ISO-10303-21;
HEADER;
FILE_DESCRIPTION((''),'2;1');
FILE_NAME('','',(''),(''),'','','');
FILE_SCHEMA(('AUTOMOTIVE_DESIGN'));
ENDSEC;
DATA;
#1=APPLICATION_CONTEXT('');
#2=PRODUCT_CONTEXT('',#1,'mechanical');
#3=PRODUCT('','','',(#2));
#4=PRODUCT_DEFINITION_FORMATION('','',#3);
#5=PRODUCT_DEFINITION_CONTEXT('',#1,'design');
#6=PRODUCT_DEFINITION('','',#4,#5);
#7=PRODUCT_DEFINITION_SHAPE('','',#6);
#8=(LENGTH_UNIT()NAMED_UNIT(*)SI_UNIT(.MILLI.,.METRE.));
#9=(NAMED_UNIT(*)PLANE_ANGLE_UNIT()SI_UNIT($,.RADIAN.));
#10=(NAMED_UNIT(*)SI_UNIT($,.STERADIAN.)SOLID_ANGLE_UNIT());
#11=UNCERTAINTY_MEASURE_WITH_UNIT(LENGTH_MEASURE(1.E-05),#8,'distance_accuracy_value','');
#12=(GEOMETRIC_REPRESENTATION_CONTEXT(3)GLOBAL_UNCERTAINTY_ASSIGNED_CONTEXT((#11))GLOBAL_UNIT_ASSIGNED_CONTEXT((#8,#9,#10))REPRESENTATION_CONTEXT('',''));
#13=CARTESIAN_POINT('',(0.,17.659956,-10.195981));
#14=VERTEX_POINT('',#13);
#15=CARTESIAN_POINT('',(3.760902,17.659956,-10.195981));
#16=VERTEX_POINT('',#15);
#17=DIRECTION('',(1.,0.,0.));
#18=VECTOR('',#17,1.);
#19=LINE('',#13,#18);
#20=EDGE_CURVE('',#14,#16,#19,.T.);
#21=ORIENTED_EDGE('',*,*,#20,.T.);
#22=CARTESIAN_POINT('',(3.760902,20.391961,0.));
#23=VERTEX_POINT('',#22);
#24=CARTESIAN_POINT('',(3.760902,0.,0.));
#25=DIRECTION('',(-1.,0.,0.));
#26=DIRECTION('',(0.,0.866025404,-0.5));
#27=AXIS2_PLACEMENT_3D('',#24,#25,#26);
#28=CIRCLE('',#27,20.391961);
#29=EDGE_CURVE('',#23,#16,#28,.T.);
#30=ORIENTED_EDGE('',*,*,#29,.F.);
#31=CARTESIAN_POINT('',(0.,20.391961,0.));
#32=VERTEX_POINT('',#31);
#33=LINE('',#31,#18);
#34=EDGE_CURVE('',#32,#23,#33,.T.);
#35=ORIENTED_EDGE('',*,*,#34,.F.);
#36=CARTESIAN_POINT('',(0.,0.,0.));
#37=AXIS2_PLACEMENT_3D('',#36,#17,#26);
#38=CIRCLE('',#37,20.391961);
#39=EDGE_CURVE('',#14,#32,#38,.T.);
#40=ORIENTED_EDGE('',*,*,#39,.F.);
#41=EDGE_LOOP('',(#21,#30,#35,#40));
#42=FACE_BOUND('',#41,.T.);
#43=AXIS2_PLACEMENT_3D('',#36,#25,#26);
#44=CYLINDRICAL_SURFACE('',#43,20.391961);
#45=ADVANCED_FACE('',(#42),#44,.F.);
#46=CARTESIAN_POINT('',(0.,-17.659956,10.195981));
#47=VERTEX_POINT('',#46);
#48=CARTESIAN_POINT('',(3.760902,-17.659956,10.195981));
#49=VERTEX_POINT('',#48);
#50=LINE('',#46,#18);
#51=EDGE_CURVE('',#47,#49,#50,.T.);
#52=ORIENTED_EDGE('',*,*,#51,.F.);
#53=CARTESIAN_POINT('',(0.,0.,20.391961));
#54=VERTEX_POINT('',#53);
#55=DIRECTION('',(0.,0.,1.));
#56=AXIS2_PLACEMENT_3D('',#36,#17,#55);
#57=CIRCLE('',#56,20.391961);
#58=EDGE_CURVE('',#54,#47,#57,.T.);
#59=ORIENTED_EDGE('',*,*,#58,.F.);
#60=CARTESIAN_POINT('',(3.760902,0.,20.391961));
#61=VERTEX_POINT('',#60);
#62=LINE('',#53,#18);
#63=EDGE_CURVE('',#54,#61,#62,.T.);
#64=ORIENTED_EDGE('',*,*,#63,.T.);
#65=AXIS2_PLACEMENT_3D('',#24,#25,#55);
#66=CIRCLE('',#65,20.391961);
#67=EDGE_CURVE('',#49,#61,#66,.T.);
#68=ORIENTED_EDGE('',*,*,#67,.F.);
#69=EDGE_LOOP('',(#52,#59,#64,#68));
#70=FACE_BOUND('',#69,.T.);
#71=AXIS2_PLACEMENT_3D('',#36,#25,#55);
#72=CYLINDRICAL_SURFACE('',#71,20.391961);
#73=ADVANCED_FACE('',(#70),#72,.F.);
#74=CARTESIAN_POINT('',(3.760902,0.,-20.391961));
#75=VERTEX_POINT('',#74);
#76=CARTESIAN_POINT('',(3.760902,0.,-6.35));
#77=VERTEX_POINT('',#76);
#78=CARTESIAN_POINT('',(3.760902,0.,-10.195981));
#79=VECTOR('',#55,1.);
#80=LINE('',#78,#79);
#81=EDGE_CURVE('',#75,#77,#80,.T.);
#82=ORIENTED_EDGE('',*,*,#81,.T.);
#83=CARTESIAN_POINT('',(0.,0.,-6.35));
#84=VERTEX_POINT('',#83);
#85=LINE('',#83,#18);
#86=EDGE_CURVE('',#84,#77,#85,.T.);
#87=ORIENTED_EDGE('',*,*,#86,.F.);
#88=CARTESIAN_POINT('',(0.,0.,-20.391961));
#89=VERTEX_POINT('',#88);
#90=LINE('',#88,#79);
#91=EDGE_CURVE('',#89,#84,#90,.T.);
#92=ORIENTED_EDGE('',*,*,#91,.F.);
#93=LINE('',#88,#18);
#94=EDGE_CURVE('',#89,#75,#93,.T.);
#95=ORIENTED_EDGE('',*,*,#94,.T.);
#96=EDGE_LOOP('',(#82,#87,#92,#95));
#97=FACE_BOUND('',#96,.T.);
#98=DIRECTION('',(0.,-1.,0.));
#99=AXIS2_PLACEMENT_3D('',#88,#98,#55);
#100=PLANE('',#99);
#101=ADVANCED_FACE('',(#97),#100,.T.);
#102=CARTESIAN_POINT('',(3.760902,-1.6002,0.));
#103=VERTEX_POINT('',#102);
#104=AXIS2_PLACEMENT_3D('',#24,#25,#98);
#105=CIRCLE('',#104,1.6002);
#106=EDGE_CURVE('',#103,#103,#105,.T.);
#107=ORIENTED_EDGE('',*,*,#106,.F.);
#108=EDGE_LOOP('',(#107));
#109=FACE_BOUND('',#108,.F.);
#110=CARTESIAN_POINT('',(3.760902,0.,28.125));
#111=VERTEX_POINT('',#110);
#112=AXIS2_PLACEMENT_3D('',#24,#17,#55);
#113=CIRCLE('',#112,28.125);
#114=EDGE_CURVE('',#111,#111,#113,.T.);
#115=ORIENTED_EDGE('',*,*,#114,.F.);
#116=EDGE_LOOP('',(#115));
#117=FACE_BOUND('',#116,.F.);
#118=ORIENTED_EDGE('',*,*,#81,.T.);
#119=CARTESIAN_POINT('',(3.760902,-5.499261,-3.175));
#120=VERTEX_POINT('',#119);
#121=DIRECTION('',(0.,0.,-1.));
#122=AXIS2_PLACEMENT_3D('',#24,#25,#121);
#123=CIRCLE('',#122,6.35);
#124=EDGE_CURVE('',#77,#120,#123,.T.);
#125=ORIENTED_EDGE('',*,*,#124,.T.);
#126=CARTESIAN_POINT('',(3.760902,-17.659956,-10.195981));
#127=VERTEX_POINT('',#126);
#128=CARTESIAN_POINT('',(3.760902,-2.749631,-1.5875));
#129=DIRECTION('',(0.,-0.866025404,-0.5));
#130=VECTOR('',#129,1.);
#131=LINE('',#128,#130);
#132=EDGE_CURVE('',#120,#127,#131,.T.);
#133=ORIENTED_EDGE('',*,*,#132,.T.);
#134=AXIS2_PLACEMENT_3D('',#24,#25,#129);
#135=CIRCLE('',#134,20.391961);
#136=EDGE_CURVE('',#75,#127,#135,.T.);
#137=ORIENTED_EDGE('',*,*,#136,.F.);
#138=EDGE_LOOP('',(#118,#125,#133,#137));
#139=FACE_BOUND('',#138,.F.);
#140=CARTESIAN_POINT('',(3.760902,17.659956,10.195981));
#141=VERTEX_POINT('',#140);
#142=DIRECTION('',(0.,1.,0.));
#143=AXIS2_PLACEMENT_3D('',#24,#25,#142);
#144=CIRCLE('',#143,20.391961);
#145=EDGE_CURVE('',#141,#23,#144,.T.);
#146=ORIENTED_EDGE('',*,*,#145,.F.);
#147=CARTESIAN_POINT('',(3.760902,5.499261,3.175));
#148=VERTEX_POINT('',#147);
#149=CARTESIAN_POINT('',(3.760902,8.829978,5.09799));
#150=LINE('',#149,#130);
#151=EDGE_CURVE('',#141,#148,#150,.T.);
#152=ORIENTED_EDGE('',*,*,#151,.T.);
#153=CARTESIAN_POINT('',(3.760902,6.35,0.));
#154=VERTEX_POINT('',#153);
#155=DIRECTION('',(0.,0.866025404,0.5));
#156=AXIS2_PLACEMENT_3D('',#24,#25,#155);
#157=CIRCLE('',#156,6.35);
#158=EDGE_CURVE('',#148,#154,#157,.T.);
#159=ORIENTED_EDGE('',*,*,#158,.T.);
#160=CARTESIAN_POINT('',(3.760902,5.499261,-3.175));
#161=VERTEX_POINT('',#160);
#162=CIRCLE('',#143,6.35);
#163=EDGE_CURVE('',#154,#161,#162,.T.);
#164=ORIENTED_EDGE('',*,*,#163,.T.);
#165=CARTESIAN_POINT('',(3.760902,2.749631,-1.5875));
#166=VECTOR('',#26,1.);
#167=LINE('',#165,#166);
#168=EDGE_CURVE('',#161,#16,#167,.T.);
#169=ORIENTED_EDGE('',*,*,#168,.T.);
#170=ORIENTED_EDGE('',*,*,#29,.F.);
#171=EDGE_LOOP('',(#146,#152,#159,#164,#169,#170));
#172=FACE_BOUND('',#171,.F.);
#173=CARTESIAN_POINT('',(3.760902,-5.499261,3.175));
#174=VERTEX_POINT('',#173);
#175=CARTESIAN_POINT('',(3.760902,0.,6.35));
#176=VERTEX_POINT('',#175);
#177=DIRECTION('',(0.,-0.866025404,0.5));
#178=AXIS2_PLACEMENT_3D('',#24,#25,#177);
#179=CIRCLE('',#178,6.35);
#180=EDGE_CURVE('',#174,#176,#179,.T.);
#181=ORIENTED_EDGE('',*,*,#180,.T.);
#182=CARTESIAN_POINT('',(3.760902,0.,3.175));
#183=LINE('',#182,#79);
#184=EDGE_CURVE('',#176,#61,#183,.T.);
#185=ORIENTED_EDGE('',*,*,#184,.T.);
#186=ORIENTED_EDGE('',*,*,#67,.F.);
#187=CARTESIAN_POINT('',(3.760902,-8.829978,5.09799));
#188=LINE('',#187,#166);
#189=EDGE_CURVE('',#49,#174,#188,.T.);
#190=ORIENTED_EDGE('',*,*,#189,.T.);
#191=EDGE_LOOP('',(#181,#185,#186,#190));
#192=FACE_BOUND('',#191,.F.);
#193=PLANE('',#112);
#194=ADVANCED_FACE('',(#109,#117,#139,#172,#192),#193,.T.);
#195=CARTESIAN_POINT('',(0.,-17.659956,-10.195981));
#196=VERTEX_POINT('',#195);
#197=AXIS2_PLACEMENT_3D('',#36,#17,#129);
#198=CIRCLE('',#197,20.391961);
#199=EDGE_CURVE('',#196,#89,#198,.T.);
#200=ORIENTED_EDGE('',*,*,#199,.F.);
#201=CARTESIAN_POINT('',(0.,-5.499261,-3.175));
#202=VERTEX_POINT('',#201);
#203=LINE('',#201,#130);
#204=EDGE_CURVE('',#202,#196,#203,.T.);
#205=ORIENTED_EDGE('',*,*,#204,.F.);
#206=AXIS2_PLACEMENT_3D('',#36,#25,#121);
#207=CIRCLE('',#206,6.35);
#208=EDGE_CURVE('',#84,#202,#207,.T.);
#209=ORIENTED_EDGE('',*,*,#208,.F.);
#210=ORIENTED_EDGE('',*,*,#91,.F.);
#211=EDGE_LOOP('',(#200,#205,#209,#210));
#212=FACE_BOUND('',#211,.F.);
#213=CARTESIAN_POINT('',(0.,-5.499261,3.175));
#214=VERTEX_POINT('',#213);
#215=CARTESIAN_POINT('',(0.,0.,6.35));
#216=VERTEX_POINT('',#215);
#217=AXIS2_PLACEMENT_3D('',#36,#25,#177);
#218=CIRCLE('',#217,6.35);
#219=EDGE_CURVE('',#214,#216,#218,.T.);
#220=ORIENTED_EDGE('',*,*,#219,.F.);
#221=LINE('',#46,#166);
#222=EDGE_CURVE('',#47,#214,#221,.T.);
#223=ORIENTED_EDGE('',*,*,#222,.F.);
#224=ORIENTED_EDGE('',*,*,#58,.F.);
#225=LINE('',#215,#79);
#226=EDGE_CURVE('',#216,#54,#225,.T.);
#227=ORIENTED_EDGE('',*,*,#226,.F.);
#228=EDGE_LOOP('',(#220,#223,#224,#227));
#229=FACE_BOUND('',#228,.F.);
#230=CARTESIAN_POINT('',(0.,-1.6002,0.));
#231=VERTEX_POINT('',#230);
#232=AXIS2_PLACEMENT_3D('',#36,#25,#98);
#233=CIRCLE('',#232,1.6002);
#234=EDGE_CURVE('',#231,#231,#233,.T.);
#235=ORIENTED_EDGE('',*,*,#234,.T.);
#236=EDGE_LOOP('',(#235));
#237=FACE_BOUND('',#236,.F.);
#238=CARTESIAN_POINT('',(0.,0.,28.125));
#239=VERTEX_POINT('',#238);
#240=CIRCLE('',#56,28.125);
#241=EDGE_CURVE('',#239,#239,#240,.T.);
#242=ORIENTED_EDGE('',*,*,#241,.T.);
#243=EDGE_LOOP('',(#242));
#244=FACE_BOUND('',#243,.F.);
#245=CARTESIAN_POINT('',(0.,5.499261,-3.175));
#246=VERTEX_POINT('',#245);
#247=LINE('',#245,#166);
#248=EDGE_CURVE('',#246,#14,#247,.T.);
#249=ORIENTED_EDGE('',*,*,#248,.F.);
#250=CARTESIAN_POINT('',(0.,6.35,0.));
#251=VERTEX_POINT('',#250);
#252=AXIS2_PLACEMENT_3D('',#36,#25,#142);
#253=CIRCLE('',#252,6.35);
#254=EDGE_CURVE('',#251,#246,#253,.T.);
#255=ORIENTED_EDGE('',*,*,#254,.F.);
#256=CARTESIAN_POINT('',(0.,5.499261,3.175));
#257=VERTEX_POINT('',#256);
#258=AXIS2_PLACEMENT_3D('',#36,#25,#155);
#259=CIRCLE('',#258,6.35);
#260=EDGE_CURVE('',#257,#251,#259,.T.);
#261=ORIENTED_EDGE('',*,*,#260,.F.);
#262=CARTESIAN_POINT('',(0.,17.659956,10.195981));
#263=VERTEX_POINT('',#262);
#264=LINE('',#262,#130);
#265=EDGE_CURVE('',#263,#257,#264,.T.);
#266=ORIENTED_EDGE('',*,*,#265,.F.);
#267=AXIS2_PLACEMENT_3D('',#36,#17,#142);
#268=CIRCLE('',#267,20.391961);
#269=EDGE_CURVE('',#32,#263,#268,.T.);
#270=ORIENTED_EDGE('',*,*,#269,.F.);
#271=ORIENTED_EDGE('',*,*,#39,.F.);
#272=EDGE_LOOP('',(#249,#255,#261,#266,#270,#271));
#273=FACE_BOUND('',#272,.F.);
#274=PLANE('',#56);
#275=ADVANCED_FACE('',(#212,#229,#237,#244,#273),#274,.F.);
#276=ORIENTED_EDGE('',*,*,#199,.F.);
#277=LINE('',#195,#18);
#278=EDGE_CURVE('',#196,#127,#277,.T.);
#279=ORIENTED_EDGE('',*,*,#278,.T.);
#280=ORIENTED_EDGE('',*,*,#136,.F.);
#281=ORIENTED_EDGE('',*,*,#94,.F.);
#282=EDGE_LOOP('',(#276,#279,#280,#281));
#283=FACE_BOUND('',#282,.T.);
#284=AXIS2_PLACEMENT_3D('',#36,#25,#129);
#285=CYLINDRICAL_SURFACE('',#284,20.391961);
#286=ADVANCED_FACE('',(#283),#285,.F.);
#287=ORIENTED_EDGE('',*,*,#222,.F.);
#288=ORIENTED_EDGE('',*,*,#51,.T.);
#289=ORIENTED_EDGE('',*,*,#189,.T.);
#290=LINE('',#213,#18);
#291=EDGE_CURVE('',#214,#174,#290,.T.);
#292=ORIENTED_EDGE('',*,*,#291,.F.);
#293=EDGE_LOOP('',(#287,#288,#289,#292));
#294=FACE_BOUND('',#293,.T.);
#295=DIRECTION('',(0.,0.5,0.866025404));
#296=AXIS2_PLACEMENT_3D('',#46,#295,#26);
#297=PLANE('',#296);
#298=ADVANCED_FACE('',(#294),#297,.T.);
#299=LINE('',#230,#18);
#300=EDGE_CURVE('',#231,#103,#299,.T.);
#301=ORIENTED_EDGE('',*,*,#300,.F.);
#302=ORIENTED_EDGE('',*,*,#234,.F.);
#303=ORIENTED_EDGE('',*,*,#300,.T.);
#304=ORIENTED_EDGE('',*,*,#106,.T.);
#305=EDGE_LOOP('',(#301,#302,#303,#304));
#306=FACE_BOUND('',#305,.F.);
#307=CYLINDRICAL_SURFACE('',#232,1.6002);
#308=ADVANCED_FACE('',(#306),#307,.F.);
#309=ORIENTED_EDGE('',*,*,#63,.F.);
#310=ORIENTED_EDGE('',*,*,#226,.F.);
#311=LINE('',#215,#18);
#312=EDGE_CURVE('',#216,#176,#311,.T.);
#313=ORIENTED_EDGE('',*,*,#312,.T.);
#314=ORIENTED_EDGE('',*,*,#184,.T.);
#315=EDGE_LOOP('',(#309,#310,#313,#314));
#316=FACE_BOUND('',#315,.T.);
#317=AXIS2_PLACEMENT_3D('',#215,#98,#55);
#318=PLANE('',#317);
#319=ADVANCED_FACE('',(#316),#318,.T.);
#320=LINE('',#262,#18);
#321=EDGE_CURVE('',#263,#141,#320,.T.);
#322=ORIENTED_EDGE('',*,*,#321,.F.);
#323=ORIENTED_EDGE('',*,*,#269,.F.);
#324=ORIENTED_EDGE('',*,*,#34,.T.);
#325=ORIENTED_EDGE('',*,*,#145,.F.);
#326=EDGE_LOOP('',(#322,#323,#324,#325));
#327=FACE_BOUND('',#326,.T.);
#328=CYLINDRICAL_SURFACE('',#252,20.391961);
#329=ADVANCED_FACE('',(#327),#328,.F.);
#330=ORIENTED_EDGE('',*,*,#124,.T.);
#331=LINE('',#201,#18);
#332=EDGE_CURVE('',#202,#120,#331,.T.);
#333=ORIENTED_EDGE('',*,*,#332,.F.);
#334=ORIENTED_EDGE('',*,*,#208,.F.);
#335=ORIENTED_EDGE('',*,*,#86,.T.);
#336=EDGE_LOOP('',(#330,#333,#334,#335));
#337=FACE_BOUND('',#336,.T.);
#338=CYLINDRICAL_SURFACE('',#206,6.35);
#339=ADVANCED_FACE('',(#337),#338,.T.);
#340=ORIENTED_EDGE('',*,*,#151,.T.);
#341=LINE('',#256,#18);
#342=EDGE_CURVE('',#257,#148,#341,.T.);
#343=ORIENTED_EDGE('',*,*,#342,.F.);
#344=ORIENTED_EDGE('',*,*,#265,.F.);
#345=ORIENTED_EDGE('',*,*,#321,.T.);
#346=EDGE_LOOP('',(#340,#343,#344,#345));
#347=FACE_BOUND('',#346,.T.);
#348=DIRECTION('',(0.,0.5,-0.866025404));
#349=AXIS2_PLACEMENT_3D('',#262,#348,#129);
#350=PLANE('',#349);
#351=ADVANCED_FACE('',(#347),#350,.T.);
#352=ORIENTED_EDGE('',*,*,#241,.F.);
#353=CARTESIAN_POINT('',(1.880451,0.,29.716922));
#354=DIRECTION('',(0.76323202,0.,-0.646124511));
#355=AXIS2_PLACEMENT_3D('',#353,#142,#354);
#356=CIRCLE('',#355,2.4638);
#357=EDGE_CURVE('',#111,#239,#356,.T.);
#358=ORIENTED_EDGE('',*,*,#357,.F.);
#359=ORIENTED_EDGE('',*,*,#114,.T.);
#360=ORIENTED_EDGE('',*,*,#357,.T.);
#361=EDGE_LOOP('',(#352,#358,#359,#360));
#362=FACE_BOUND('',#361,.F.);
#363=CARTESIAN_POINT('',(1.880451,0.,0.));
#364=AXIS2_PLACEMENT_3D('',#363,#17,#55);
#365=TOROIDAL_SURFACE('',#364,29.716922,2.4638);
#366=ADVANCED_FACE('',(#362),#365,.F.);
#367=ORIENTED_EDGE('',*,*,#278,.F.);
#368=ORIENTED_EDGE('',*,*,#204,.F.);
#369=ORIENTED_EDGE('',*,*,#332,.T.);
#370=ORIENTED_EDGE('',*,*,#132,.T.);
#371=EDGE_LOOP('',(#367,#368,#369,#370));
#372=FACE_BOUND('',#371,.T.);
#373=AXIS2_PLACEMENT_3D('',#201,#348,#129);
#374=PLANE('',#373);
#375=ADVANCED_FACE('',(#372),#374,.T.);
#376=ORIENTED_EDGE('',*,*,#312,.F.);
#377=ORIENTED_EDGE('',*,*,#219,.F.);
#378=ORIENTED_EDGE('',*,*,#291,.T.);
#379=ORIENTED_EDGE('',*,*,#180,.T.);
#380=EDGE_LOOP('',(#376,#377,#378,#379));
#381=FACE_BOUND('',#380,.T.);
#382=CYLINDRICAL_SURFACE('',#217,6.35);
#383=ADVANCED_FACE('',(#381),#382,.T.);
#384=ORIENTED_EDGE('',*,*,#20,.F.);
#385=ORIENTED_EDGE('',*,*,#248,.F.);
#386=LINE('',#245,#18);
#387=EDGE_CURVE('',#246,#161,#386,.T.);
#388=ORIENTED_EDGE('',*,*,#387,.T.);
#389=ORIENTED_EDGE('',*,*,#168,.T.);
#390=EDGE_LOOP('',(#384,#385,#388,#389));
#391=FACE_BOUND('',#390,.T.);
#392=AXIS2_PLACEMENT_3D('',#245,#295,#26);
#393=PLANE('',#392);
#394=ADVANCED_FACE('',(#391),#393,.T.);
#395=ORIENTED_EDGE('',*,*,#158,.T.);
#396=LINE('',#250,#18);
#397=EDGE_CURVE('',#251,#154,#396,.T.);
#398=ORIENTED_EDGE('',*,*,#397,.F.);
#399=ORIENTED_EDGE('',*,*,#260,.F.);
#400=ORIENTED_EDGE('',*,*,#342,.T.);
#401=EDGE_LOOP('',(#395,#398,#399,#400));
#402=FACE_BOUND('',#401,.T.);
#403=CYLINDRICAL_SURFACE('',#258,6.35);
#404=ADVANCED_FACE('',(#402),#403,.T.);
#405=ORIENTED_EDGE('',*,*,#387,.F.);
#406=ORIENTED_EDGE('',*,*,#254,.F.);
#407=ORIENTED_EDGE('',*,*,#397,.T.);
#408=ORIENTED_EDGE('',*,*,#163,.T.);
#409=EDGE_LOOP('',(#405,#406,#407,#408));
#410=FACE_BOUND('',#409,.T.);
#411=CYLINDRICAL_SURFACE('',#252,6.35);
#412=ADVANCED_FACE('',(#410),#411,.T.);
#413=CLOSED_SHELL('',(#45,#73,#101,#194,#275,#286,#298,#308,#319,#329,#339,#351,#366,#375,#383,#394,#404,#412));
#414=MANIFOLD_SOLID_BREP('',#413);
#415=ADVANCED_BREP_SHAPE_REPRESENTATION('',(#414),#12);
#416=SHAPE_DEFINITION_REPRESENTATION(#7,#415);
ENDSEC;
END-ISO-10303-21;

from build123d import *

# Parameters (mm, degrees)
F3_DEPTH      = 82
F3_DEPTH_BACK = 25.4
F4_R          = 1.6002
F5_DEPTH      = 3.7619021022


# Not quite as in the source:
# - an extrude ends at something that could not be found from the text; its depth is read off the source's solid


with BuildPart() as f1:
    # F0 (on Front) → F1 (revolve)
    with BuildSketch(Plane.XZ):
        with BuildLine():
            Line((0, 28.125), (0, 0))
            Line((0, 0), (3.7609021022, 0))
            Line((3.7609021022, 0), (3.7609021022, 28.125))
            ThreePointArc((3.7609021022, 28.125), (1.8804510511, 27.2531215698), (0, 28.125))
        make_face()
    revolve(axis=Axis((1.8804510511, 0, 0), (1, 0, 0)))

    # F2 (on Right) → F3 (cut, two sides)
    with BuildSketch(Plane.YZ) as f3_sk:
        with BuildLine():
            ThreePointArc((-5.499261314, 3.175), (-3.175, 5.499261314), (0, 6.35))
            Line((0, 6.35), (0, 20.391961195))
            ThreePointArc((0, 20.391961195), (-10.1959805975, 17.6599564279), (-17.6599564279, 10.1959805975))
            Line((-17.6599564279, 10.1959805975), (-5.499261314, 3.175))
        make_face()
        with BuildLine():
            Line((0, -20.391961195), (0, -6.35))
            ThreePointArc((0, -6.35), (-3.175, -5.499261314), (-5.499261314, -3.175))
            Line((-5.499261314, -3.175), (-17.6599564279, -10.1959805975))
            ThreePointArc((-17.6599564279, -10.1959805975), (-10.1959805975, -17.6599564279), (0, -20.391961195))
        make_face()
        with BuildLine():
            ThreePointArc((5.499261314, 3.175), (6.1336289969, 1.6435009364), (6.35, 0))
            ThreePointArc((6.35, 0), (6.1336289969, -1.6435009364), (5.499261314, -3.175))
            Line((5.499261314, -3.175), (17.6599564279, -10.1959805975))
            ThreePointArc((17.6599564279, -10.1959805975), (19.6971219669, -5.2778279243), (20.391961195, 0))
            ThreePointArc((20.391961195, 0), (19.6971219669, 5.2778279243), (17.6599564279, 10.1959805975))
            Line((17.6599564279, 10.1959805975), (5.499261314, 3.175))
        make_face()
    extrude(amount=-F3_DEPTH, mode=Mode.SUBTRACT)
    extrude(f3_sk.sketch, amount=F3_DEPTH_BACK, mode=Mode.SUBTRACT)

    # F4 (on face) → F5 (cut, through all)
    with BuildSketch(Plane(origin=(0, 0, 0), x_dir=(0, -1, 0), z_dir=(-1, 0, 0))):
        Circle(F4_R)
    extrude(amount=-F5_DEPTH, mode=Mode.SUBTRACT)


solid = f1.part
